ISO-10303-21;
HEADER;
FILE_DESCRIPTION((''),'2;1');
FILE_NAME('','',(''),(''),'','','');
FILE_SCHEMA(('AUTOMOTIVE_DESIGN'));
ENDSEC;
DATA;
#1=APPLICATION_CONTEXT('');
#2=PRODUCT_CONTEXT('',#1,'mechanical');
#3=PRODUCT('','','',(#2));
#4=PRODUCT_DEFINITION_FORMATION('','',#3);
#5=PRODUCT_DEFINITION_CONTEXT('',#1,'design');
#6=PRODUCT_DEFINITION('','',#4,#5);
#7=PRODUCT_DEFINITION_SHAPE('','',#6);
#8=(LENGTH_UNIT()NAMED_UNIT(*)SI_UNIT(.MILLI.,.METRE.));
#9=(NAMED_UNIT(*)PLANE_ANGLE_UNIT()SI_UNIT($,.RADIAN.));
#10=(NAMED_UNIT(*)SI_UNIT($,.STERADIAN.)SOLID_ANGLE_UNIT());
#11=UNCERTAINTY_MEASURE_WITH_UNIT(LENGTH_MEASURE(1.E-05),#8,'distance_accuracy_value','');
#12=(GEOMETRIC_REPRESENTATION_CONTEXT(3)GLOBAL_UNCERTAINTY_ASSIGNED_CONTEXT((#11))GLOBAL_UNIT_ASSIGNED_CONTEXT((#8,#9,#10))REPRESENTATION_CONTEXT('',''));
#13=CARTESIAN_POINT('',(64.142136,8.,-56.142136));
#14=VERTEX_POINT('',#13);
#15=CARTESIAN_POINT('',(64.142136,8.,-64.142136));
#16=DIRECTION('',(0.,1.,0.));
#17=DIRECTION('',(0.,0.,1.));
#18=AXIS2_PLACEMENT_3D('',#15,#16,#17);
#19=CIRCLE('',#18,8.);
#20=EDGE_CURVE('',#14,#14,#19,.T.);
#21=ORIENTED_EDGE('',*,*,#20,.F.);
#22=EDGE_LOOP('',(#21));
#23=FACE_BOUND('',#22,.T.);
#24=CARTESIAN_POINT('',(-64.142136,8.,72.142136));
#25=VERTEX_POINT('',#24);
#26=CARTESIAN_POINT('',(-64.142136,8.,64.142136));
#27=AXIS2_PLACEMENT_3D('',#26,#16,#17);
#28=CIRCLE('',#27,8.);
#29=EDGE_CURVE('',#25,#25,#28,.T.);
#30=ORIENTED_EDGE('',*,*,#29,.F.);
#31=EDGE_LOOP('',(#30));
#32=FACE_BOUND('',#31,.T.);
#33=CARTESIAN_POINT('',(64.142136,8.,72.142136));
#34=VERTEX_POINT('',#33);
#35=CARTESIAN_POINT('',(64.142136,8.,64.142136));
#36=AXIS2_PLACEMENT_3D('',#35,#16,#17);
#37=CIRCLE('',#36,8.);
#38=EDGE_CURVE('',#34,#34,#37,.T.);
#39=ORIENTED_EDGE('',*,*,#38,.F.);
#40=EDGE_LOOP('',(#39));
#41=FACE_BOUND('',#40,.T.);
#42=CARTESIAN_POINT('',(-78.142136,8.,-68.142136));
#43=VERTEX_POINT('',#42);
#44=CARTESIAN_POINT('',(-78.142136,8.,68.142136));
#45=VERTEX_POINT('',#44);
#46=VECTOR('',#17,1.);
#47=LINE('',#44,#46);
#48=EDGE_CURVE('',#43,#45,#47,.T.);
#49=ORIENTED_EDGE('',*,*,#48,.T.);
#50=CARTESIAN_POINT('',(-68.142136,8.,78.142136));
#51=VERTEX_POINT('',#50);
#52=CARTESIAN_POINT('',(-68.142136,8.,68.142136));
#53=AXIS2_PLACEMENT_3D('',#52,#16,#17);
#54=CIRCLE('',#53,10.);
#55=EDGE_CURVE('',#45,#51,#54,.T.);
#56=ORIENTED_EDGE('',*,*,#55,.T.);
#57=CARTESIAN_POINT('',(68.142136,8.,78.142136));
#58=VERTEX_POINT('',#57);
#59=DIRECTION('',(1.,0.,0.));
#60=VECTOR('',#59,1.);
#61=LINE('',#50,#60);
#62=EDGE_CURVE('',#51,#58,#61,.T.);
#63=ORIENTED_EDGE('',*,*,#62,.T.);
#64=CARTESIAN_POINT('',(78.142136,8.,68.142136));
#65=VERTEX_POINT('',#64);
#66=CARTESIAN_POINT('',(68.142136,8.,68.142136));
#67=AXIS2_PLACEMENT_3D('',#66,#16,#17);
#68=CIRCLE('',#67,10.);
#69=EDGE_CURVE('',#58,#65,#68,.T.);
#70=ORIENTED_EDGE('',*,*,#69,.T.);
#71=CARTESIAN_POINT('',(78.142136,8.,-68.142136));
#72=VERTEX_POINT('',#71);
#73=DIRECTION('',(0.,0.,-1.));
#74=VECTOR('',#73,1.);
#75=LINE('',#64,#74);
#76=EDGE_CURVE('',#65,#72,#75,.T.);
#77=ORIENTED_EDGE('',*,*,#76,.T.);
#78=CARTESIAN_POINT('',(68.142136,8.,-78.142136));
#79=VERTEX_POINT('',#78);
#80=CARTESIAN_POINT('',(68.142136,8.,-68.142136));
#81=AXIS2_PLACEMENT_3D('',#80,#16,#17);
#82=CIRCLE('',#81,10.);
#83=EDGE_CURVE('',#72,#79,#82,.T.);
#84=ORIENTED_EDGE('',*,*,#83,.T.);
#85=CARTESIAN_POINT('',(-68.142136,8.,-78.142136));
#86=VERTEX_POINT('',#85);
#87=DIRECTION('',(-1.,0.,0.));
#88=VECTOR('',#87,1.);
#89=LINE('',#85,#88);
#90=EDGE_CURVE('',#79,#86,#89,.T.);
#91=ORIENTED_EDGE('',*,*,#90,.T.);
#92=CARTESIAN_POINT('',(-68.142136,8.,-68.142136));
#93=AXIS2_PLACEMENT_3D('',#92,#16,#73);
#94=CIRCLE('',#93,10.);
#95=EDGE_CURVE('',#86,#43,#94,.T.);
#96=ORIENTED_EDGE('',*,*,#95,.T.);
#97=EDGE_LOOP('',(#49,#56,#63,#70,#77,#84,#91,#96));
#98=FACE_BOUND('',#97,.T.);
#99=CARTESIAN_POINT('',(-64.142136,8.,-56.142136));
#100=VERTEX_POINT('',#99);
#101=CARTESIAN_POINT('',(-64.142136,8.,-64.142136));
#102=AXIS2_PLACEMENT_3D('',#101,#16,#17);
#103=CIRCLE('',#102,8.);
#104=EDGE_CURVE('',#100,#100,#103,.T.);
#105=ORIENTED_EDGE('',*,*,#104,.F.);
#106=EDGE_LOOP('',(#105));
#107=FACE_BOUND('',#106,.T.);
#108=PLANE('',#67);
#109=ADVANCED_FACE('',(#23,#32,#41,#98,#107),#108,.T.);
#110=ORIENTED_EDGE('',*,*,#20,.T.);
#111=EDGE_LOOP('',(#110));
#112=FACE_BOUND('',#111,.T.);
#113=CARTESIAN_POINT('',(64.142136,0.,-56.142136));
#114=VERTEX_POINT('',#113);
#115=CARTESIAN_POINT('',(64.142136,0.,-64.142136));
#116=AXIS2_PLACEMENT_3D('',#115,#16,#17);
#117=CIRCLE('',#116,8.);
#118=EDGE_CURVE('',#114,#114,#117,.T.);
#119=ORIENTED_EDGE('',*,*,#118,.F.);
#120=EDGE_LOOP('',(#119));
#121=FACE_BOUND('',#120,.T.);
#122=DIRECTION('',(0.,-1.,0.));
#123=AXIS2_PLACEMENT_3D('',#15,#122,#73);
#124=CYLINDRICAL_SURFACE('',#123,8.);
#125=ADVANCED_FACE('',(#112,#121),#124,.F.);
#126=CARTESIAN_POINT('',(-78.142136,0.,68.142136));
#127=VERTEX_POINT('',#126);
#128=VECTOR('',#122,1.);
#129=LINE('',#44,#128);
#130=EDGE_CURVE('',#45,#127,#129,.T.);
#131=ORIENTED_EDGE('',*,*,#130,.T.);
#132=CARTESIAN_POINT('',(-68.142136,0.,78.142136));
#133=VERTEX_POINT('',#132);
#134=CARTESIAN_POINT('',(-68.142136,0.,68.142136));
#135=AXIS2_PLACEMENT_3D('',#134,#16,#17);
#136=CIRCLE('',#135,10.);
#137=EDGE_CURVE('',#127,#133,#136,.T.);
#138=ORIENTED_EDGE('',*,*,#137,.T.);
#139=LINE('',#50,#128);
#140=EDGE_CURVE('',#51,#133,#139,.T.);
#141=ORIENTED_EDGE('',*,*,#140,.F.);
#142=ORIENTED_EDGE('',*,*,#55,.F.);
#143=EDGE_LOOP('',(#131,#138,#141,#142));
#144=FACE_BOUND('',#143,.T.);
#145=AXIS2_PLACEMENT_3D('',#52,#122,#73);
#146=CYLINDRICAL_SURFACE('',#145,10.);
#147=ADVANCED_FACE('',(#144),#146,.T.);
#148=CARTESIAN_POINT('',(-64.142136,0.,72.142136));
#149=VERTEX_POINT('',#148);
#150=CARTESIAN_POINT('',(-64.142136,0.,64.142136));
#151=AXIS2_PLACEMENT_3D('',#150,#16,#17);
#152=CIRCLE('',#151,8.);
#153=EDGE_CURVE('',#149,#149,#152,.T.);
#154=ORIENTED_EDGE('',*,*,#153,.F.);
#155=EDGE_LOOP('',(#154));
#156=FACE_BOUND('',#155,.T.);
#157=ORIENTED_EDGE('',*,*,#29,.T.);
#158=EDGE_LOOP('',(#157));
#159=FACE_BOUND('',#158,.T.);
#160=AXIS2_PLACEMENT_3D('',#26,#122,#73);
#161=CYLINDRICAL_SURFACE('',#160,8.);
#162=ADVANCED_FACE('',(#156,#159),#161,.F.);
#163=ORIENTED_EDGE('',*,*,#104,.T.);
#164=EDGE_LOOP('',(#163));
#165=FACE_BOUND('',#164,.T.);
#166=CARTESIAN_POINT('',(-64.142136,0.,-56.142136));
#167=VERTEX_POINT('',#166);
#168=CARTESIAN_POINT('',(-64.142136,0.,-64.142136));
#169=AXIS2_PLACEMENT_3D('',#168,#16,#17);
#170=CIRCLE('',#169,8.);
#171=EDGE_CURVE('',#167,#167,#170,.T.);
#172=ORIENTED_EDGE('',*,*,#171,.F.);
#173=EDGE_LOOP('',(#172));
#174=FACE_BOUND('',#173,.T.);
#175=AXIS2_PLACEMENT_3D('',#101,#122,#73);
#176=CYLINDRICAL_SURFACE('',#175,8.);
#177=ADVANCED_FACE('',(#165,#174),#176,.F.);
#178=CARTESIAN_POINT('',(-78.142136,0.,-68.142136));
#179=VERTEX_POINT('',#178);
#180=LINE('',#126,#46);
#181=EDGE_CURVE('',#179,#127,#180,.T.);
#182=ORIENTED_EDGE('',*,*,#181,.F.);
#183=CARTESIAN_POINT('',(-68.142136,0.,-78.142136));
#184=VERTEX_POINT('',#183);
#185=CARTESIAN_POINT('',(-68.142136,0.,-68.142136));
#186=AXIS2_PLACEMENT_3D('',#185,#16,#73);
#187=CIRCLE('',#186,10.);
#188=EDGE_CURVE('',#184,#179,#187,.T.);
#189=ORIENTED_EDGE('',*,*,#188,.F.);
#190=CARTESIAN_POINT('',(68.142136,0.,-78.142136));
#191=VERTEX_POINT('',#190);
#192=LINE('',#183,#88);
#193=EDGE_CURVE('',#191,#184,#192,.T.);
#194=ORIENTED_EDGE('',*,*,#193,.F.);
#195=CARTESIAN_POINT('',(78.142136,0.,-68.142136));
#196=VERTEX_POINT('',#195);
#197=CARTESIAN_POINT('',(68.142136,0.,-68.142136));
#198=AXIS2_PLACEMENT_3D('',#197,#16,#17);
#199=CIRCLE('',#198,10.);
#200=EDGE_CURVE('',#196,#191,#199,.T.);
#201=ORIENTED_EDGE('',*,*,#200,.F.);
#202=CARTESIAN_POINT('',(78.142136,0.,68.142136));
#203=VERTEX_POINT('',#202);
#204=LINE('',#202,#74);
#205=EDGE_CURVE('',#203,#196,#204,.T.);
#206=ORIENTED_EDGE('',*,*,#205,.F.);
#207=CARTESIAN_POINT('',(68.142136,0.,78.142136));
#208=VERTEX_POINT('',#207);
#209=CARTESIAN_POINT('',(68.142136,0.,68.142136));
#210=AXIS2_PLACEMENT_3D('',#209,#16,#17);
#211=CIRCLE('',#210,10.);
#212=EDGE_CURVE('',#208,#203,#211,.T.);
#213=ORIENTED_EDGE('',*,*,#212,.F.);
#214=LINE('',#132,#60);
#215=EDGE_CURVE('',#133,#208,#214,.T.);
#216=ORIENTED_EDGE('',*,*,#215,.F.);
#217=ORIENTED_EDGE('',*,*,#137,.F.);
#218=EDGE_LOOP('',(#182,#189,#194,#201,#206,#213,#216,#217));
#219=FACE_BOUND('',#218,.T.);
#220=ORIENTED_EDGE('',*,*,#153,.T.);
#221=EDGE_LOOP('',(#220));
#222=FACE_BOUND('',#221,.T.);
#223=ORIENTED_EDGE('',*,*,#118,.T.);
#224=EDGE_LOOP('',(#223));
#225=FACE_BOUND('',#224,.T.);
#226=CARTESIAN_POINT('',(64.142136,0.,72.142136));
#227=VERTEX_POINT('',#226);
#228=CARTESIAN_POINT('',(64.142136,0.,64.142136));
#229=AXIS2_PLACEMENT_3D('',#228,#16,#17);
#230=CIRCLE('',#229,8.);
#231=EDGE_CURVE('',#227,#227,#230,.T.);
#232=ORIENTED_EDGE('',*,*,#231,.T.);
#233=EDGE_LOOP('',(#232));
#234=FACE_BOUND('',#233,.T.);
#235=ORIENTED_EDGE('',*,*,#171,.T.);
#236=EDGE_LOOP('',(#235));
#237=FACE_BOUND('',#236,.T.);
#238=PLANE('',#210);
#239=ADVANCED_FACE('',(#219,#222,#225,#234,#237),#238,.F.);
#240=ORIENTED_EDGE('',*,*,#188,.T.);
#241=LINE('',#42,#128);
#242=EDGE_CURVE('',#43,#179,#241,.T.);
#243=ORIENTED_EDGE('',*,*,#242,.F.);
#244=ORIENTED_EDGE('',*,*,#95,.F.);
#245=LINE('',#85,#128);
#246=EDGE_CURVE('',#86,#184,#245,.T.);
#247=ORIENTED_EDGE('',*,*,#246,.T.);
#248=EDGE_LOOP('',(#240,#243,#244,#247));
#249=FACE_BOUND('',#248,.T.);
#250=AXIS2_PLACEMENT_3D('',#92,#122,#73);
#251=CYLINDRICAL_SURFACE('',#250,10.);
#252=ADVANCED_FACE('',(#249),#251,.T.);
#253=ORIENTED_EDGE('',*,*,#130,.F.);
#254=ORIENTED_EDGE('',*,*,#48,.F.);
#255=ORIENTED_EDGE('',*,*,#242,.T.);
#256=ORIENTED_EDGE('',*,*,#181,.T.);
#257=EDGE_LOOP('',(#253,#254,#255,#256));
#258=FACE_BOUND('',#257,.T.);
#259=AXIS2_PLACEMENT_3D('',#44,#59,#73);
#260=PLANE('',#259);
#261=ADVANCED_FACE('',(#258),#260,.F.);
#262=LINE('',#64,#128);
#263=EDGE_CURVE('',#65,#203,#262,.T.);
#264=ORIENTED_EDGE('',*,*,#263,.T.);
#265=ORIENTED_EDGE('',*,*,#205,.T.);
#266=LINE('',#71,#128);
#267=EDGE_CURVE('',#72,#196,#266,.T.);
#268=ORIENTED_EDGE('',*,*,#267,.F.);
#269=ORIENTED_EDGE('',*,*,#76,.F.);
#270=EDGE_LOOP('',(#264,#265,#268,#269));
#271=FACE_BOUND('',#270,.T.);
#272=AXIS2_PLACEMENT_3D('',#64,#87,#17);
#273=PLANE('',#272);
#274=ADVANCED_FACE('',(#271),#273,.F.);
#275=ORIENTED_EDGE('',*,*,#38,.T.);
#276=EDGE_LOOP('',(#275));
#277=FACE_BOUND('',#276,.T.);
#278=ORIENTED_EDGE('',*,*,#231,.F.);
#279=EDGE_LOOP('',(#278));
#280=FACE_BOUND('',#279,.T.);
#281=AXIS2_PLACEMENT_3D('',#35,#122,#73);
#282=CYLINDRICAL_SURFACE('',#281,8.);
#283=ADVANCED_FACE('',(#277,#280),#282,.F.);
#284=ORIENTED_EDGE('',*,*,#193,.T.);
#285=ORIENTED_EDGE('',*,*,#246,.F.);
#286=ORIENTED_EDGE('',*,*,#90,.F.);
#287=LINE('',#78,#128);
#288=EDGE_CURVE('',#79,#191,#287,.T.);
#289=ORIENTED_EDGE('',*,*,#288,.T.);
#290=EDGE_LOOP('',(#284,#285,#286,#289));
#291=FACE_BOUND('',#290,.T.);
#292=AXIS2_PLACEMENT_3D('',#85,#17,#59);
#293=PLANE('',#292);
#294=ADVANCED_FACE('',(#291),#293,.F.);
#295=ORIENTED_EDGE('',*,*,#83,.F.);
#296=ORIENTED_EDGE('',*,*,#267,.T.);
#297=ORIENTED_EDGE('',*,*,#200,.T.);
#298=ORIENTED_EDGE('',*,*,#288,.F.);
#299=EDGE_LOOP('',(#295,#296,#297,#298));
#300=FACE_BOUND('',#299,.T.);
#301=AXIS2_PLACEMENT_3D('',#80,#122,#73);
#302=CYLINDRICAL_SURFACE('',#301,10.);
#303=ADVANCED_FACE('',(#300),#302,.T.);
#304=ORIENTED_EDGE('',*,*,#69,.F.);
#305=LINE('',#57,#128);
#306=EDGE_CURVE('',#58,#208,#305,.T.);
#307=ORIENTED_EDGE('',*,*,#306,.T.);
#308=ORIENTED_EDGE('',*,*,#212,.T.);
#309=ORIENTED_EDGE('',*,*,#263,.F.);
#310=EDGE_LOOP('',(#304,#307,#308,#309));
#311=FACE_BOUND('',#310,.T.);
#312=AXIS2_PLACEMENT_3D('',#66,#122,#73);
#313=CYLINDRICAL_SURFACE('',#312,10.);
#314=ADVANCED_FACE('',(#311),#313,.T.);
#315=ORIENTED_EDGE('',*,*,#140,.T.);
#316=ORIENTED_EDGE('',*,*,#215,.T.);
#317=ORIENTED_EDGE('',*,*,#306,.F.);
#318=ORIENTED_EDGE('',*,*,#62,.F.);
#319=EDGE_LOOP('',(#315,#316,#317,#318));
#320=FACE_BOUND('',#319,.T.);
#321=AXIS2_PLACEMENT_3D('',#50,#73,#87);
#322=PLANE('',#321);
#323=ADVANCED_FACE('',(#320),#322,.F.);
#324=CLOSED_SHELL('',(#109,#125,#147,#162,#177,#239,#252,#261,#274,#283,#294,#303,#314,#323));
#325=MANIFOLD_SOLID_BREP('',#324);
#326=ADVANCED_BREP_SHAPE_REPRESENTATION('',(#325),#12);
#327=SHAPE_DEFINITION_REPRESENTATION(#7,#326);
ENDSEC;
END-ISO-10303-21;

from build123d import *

# Parameters (mm, degrees)
SKETCH_1_R             = 8
SM_BASE_FLANGE_1_DEPTH = 8


# Sheet-metal steps are written as plain solids
with BuildPart() as part:
    # Sketch 1 → Базовая кромка1 (new body)
    with BuildSketch(Plane(origin=(0, 0, 0), x_dir=(1, 0, 0), z_dir=(0, 1, 0))):
        with BuildLine():
            Line((-78.142135624, -68.142135624), (-78.142135624, 68.142135624))
            ThreePointArc((-78.142135624, 68.142135624), (-75.213203436, 75.213203436), (-68.142135624, 78.142135624))
            Line((-68.142135624, 78.142135624), (68.142135624, 78.142135624))
            ThreePointArc((68.142135624, 78.142135624), (75.213203436, 75.213203436), (78.142135624, 68.142135624))
            Line((78.142135624, 68.142135624), (78.142135624, -68.142135624))
            ThreePointArc((78.142135624, -68.142135624), (75.213203436, -75.213203436), (68.142135624, -78.142135624))
            Line((68.142135624, -78.142135624), (-68.142135624, -78.142135624))
            ThreePointArc((-68.142135624, -78.142135624), (-75.213203436, -75.213203436), (-78.142135624, -68.142135624))
        make_face()
        with Locations(Location((64.142135624, 64.142135624, 0), (0, 0, 270))):
            Circle(SKETCH_1_R, mode=Mode.SUBTRACT)
        with Locations(Location((64.142135624, -64.142135624, 0), (0, 0, 270))):
            Circle(SKETCH_1_R, mode=Mode.SUBTRACT)
        with Locations(Location((-64.142135624, -64.142135624, 0), (0, 0, 270))):
            Circle(SKETCH_1_R, mode=Mode.SUBTRACT)
        with Locations(Location((-64.142135624, 64.142135624, 0), (0, 0, 270))):
            Circle(SKETCH_1_R, mode=Mode.SUBTRACT)
    extrude(amount=SM_BASE_FLANGE_1_DEPTH)


solid = part.part
